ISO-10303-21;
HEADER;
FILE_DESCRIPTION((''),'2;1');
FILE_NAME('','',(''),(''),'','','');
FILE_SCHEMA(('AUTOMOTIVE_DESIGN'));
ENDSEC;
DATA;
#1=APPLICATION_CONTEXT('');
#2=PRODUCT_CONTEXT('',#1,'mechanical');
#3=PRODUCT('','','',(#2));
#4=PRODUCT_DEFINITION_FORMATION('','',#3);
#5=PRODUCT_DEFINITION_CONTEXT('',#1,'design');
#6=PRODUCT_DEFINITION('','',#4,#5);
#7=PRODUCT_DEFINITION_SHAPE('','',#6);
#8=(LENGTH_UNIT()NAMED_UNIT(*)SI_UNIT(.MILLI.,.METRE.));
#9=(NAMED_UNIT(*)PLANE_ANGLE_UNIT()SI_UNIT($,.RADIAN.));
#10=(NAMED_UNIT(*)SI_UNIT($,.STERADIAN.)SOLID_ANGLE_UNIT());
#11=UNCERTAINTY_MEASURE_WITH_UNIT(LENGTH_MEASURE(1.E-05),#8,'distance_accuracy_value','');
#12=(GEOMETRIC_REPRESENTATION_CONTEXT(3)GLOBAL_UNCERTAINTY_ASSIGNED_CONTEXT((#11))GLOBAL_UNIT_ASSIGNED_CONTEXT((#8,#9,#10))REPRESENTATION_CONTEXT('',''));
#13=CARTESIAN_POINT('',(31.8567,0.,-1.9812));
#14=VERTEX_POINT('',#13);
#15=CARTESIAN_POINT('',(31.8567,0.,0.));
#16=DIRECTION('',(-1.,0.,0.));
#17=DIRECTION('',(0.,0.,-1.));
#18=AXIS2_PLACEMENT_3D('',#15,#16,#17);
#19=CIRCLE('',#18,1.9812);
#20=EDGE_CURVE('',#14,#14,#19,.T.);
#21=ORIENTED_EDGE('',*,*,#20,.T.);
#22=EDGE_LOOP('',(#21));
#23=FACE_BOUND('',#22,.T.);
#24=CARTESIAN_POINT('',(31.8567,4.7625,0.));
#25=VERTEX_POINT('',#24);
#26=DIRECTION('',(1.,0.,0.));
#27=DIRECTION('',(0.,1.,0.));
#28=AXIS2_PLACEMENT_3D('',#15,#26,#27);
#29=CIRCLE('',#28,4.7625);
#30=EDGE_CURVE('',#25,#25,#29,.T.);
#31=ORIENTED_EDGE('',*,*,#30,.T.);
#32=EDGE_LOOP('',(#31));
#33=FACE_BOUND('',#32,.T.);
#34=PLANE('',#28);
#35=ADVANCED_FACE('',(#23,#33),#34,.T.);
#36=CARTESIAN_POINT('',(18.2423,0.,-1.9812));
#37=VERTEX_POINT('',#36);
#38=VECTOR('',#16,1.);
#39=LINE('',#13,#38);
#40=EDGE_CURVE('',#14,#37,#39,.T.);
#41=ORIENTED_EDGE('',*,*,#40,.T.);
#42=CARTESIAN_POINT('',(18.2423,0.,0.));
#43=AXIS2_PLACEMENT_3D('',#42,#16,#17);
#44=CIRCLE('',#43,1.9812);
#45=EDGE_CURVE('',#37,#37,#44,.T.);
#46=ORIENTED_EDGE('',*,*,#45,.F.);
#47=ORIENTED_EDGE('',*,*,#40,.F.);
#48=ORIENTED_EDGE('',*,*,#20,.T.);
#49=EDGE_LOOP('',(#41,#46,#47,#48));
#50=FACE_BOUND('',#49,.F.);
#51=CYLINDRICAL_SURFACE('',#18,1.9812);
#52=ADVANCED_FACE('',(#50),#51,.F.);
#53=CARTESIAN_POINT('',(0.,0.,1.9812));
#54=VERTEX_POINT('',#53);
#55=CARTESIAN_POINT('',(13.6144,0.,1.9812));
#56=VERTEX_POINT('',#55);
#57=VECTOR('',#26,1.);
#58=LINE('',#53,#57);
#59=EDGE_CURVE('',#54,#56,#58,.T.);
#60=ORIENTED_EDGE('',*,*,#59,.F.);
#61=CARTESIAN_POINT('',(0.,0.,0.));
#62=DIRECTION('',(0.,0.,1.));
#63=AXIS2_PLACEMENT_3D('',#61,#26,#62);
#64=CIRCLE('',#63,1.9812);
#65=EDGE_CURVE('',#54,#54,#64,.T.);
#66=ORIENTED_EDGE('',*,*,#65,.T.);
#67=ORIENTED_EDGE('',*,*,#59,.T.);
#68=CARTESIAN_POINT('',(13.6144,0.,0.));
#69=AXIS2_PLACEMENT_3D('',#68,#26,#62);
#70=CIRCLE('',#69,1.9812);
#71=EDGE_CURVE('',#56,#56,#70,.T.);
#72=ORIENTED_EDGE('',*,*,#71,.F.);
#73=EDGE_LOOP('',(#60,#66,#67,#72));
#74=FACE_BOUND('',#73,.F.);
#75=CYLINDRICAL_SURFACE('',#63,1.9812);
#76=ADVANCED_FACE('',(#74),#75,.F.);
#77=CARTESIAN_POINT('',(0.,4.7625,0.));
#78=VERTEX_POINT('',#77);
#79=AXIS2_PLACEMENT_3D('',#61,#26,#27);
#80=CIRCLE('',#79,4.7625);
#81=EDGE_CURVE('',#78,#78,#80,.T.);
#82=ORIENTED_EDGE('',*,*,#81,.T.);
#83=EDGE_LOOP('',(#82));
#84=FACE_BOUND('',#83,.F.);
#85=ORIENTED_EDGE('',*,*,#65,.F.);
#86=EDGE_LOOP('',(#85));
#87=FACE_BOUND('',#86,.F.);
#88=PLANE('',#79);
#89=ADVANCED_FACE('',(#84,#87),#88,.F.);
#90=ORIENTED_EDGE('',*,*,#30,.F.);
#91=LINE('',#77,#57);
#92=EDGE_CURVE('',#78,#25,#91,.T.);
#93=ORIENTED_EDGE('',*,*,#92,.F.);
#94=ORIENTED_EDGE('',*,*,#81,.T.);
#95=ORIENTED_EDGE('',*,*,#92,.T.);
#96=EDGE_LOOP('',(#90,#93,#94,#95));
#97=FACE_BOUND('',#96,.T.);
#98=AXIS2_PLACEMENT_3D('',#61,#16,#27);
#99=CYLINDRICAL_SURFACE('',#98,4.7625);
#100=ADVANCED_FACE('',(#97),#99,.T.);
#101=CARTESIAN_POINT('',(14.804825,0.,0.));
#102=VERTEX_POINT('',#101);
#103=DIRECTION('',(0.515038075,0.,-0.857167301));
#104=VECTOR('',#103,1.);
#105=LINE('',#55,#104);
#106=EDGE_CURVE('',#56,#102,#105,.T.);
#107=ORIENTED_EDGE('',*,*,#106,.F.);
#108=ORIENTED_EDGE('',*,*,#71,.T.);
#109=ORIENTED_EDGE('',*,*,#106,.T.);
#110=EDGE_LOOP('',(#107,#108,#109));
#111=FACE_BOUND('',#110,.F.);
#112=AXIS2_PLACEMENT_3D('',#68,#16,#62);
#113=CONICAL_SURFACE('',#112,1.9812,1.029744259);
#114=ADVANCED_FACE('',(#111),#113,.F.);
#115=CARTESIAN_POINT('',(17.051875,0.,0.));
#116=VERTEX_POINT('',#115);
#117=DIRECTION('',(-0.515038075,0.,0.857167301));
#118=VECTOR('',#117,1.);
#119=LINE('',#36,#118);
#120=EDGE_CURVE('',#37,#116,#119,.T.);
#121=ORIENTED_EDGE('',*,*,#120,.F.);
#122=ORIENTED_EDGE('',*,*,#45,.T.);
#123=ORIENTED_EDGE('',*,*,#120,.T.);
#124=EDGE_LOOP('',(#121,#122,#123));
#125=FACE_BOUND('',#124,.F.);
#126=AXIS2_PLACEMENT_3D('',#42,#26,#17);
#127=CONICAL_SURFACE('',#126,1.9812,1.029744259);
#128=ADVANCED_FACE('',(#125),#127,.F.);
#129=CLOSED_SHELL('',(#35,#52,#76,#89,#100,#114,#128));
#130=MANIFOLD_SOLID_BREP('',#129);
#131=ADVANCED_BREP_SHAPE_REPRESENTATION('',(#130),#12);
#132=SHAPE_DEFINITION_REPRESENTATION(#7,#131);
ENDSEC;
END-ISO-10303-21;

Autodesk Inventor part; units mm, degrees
ref_plane "YZ Plane" through (0, 0, 0) normal (1, 0, 0) x (0, 1, 0)
ref_plane "XZ Plane" through (0, 0, 0) normal (0, 1, 0) x (-1, 0, 0)
ref_plane "XY Plane" through (0, 0, 0) normal (0, 0, 1) x (1, 0, 0)
sketch "Sketch1" plane through (0, 0, 0) normal (1, 0, 0) x (0, 1, 0)
  circle A0 centre (0, 0) radius 4.7625
  dimension "d0" = 9.525
extrude "Extrusion1" add sketch "Sketch1" along normal blind 31.8567
sketch "Sketch2" plane through (31.8567, 0, 0) normal (1, 0, 0) x (0, 0, -1)
  point P0 (0, 0)
  point P1 (0, 0)
hole "Hole1" at (31.8567, 0, 0) direction (-1, 0, 0) diameter 3.9624 depth 13.6144 tip angle 118 thread size "10-32 UNF" class "2B" standard "ANSI Unified Screw Threads"
sketch "Sketch3" plane through (0, 0, 0) normal (-1, 0, 0) x (0, 0, 1)
  circle A0 centre (0, 0) radius 1.9812 projected
hole "Hole2" at (0, 0, 0) direction (1, 0, 0) diameter 3.9624 depth 13.6144 tip angle 118 thread size "10-32 UNF" class "2B" standard "ANSI Unified Screw Threads"
properties part number "STOCK,ROUND,0.375inOD,10-32,STANDOFF" material "Aluminum 6061"
